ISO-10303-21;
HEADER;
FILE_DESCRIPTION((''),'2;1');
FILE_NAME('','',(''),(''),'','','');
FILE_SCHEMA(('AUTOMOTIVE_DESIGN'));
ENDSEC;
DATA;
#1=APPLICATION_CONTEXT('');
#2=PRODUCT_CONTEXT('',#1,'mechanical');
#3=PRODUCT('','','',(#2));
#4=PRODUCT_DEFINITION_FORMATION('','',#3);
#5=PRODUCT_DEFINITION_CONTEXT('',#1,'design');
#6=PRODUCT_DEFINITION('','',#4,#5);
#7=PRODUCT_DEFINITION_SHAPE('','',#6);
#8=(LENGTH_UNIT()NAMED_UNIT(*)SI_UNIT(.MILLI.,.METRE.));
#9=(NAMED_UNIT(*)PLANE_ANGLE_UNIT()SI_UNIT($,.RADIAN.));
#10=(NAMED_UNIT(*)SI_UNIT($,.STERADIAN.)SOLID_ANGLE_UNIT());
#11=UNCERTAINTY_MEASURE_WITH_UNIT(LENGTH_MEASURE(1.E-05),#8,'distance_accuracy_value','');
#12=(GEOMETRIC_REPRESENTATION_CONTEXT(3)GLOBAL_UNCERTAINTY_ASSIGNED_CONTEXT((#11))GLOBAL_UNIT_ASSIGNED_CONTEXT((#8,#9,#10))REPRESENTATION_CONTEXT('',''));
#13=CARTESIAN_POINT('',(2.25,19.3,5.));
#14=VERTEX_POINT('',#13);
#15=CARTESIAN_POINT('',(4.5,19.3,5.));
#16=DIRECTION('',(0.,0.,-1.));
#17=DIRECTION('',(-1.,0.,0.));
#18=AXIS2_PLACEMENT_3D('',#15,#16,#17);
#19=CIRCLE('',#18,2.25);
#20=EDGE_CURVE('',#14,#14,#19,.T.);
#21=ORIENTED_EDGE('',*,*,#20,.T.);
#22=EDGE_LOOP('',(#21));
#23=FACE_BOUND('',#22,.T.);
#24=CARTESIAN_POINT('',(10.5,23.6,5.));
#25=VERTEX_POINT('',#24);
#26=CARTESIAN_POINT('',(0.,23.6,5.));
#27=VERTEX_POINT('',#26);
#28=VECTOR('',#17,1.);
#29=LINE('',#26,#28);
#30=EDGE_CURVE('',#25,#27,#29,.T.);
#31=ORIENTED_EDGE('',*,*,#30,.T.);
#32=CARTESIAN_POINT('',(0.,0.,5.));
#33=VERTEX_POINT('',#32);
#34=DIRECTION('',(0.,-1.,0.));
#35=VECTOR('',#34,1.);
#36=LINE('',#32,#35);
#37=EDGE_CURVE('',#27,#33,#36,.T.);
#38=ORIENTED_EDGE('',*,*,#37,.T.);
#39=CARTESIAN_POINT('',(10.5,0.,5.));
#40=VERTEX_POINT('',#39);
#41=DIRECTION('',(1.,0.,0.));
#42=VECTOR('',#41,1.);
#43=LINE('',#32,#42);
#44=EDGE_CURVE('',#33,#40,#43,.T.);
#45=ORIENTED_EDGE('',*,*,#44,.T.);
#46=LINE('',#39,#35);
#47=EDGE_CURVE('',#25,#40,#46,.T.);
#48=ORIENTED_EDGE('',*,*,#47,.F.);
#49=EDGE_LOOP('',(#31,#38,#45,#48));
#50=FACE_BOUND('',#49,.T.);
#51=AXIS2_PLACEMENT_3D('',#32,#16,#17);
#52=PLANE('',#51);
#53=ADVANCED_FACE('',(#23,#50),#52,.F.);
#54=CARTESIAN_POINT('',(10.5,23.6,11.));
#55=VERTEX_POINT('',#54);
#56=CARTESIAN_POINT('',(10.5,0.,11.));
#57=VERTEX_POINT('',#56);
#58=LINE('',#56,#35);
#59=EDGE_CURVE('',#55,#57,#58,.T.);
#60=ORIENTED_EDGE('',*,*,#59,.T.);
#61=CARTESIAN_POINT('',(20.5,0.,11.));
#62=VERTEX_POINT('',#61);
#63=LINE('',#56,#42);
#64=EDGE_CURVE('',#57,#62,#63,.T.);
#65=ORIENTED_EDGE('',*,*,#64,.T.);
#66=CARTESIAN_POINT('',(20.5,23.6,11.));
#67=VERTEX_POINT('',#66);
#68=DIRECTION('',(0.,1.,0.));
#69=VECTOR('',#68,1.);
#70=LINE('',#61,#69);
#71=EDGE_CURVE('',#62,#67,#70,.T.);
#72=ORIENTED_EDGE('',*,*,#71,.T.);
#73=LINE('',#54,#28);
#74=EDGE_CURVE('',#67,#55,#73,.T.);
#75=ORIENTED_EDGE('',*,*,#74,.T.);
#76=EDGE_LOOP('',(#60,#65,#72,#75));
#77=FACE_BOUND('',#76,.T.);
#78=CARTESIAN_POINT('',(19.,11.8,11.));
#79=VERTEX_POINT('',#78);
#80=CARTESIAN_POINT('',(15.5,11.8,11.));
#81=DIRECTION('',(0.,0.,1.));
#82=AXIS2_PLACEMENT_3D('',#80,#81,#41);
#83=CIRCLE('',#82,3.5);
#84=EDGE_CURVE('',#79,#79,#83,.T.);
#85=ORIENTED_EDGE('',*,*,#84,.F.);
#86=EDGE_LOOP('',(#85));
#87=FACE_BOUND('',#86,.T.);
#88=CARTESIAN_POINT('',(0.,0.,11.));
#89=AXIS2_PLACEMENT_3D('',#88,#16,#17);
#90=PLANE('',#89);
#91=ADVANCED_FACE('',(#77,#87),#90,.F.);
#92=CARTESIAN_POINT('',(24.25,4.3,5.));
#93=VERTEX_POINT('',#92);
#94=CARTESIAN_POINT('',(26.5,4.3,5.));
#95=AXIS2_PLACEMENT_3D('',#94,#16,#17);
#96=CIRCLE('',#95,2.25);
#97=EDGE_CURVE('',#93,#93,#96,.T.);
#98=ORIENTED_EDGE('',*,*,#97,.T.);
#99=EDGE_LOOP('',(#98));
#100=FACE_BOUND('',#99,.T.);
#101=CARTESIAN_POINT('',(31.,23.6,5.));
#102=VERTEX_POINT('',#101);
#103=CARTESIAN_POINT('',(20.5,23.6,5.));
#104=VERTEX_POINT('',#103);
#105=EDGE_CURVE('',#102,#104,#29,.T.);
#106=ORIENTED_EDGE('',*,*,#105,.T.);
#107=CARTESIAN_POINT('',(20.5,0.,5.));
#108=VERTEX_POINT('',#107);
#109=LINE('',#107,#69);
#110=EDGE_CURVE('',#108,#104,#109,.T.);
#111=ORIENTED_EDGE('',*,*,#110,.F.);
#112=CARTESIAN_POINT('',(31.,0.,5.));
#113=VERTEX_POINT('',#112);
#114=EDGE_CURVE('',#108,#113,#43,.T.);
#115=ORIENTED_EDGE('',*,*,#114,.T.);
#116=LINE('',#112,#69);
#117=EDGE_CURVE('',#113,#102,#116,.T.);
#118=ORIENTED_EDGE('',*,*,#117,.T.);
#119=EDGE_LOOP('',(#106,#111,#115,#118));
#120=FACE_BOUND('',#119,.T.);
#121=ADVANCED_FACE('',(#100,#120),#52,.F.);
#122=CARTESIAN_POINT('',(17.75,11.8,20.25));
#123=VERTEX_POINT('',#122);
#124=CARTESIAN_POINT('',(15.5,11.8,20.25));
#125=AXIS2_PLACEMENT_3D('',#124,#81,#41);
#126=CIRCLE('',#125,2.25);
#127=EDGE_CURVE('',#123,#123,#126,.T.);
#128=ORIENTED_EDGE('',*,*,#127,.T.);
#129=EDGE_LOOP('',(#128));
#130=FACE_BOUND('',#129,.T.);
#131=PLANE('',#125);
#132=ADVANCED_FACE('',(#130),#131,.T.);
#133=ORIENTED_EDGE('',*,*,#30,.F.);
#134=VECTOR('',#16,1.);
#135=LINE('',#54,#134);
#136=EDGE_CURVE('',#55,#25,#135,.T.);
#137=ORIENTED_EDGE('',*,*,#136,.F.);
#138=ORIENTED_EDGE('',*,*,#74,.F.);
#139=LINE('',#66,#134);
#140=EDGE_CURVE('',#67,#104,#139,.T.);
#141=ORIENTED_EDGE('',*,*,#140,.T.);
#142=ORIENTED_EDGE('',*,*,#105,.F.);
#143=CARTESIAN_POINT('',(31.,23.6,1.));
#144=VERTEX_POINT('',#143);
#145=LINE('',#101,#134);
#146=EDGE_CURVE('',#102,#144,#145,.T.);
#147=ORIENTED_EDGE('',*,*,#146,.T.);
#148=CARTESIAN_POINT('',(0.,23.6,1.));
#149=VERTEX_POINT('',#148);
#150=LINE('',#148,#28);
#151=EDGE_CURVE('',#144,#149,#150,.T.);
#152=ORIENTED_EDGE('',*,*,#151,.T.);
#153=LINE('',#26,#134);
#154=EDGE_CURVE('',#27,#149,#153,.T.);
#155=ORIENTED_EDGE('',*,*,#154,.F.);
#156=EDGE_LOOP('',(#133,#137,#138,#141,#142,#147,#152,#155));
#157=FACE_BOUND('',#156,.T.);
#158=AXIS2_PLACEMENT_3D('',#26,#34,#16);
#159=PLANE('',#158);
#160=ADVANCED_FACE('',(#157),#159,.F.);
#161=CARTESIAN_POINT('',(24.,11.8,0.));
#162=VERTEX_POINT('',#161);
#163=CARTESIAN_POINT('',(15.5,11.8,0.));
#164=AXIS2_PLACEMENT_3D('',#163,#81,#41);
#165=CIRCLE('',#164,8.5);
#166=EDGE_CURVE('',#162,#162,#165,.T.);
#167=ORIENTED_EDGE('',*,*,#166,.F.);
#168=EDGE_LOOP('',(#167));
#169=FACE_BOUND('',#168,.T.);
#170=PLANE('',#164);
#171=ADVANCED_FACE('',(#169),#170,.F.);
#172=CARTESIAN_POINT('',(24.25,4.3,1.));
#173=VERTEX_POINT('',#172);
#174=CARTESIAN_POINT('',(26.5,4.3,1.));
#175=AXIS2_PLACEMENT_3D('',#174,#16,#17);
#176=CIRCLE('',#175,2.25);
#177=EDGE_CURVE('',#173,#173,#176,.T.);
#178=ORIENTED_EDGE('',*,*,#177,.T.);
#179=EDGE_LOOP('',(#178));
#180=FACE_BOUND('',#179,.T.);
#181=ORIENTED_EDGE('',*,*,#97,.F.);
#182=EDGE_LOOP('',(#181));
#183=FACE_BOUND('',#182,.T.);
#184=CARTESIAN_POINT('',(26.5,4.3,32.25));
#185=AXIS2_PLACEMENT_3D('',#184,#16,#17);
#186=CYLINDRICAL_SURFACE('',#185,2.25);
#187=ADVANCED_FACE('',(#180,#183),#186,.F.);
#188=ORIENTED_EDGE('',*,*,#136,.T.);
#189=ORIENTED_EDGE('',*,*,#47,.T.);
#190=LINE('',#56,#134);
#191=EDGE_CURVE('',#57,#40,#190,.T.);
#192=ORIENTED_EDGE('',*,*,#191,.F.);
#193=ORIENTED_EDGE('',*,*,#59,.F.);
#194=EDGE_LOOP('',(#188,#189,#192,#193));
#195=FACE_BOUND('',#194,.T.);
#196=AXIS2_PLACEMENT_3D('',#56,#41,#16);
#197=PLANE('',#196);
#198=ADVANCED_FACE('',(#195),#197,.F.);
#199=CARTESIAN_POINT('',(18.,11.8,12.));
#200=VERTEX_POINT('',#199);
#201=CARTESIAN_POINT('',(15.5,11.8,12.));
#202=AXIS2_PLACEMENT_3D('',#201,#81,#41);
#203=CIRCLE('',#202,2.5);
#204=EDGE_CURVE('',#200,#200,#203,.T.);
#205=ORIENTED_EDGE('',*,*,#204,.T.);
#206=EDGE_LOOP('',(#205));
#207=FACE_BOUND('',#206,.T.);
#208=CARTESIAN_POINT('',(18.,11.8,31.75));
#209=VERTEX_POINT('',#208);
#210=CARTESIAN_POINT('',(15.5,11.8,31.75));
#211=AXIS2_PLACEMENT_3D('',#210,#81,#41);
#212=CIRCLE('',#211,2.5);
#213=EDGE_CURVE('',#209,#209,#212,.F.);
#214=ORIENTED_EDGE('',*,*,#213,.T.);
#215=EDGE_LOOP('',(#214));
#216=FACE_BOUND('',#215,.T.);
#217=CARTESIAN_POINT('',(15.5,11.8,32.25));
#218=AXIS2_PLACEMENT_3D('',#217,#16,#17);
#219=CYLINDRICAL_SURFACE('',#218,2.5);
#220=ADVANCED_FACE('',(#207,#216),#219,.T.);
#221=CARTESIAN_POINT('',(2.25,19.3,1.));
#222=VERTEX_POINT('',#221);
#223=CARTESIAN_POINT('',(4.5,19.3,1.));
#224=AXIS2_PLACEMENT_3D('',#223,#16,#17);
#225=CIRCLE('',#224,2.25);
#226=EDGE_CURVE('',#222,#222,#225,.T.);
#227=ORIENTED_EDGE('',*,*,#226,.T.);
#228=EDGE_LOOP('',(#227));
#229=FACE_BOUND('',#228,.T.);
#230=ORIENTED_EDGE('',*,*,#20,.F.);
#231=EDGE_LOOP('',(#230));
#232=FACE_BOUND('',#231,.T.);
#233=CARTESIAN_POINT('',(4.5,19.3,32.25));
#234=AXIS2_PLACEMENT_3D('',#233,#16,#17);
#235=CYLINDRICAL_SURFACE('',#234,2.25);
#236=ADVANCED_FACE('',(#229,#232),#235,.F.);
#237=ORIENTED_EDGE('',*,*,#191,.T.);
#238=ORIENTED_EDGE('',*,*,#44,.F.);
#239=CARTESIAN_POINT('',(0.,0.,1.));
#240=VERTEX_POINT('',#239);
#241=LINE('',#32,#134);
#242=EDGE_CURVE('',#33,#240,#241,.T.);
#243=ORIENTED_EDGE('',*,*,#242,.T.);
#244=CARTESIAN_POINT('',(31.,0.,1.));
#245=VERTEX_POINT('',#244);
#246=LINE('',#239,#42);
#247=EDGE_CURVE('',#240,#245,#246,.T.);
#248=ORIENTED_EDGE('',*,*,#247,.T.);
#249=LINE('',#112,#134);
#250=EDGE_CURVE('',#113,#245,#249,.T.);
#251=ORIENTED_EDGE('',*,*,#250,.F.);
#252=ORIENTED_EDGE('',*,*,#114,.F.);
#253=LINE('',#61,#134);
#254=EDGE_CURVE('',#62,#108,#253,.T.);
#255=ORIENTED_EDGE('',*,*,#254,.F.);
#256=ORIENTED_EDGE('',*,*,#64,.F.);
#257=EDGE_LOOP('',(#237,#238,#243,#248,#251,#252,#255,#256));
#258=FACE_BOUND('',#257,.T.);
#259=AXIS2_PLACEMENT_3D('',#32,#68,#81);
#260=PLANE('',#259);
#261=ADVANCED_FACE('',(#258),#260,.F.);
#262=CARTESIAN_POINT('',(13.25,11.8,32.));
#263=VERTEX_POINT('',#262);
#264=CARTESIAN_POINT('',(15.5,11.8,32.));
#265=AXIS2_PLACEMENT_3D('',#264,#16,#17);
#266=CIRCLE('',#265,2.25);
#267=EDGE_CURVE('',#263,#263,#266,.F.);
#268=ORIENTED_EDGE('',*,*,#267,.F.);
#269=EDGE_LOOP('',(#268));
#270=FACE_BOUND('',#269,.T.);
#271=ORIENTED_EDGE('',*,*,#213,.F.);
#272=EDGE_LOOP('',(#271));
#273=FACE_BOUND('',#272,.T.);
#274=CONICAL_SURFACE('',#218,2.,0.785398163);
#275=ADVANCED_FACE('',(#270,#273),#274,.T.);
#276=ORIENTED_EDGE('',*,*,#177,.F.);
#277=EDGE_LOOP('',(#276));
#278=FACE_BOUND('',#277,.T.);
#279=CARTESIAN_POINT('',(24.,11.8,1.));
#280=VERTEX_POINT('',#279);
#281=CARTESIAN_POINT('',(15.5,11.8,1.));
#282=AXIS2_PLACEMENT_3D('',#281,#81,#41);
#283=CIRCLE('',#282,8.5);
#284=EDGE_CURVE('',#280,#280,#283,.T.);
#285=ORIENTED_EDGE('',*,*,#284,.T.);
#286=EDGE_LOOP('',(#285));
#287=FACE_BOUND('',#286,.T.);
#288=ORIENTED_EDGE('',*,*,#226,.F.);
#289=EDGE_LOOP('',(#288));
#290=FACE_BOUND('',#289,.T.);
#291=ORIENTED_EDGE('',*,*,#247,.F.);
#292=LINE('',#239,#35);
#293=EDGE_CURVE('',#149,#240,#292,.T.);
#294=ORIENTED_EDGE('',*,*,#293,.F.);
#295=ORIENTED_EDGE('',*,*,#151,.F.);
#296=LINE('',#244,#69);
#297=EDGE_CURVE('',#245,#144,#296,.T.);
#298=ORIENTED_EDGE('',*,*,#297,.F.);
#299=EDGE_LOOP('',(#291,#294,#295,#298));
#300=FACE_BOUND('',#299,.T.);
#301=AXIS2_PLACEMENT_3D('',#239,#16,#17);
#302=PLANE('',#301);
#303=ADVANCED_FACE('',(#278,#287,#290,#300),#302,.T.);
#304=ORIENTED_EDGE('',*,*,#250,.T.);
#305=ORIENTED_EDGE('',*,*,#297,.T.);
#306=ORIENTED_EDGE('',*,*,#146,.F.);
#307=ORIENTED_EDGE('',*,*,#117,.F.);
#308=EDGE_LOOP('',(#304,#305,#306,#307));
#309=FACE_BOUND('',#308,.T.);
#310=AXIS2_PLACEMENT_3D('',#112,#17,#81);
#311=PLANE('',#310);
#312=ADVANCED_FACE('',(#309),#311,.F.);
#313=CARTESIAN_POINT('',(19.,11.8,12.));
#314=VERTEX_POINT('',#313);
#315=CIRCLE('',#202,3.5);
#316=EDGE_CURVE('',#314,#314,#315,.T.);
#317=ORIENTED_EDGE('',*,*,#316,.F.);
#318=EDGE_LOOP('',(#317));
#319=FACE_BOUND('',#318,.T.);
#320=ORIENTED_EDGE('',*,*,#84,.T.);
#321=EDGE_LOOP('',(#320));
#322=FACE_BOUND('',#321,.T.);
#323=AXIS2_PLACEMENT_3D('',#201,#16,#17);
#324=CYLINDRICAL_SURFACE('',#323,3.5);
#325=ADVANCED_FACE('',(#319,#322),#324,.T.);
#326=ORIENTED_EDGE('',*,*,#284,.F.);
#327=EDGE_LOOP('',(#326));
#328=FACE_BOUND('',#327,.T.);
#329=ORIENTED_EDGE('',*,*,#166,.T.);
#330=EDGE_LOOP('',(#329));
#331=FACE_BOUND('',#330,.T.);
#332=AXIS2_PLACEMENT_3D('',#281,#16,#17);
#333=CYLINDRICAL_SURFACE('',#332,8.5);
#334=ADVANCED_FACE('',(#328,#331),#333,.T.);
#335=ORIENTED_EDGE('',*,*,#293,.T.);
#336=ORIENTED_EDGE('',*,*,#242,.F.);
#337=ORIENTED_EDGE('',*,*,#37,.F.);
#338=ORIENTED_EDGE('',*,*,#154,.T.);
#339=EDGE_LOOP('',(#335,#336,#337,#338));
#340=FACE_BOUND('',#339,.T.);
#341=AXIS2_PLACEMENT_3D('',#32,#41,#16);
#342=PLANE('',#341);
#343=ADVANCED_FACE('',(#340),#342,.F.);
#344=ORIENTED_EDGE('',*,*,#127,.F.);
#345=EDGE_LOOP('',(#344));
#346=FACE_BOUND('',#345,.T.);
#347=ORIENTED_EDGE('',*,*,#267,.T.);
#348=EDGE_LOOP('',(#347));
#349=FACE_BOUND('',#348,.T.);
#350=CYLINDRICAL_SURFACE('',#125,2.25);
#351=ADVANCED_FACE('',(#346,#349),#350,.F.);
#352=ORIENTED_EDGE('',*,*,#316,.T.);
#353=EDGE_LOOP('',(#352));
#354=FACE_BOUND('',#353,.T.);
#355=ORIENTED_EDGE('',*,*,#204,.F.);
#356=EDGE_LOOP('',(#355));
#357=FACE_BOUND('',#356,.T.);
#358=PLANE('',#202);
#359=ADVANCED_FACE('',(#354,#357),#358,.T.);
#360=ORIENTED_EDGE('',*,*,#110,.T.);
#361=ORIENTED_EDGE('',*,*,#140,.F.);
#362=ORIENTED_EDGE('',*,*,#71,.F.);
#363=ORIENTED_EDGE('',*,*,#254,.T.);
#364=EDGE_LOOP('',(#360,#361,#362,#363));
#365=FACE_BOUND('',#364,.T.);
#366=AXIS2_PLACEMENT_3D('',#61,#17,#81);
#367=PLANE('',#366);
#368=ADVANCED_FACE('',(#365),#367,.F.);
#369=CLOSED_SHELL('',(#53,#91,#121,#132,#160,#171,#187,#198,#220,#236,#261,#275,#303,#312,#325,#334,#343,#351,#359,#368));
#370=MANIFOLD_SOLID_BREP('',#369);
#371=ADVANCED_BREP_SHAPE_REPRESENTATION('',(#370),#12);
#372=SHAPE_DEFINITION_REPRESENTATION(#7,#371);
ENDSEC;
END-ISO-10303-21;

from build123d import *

# Parameters (mm, degrees)
SKETCH1_R           = 8.5
BOSS_EXTRUDE1_DEPTH = 1
SKETCH2_W           = 31
SKETCH2_H           = 23.6
BOSS_EXTRUDE2_DEPTH = 4
SKETCH3_W           = 10
SKETCH3_H           = 23.6
BOSS_EXTRUDE3_DEPTH = 6
SKETCH4_R           = 3.5
BOSS_EXTRUDE4_DEPTH = 1
SKETCH5_R           = 2.5
BOSS_EXTRUDE5_DEPTH = 20.25
SKETCH7_R           = 2.25
CUT_EXTRUDE1_DEPTH  = 12
SKETCH8_R           = 2.25
CUT_EXTRUDE2_DEPTH  = 50.945194964
CHAMFER1_SIZE       = 0.5


with BuildPart() as part:
    # Sketch1 → Boss-Extrude1 (new body)
    with BuildSketch(Plane.XY):
        with Locations((15.5, 11.8)):
            Circle(SKETCH1_R)
    extrude(amount=BOSS_EXTRUDE1_DEPTH)

    # Sketch2 → Boss-Extrude2 (add)
    with BuildSketch(Plane.XY.offset(1)):
        with Locations((15.5, 11.8)):
            Rectangle(SKETCH2_W, SKETCH2_H)
    extrude(amount=BOSS_EXTRUDE2_DEPTH)

    # Sketch3 → Boss-Extrude3 (add)
    with BuildSketch(Plane.XY.offset(5)):
        with Locations((15.5, 11.8)):
            Rectangle(SKETCH3_W, SKETCH3_H)
    extrude(amount=BOSS_EXTRUDE3_DEPTH)

    # Sketch4 → Boss-Extrude4 (add)
    with BuildSketch(Plane.XY.offset(11)):
        with Locations((15.5, 11.8)):
            Circle(SKETCH4_R)
    extrude(amount=BOSS_EXTRUDE4_DEPTH)

    # Sketch5 → Boss-Extrude5 (add)
    with BuildSketch(Plane.XY.offset(12)):
        with Locations((15.5, 11.8)):
            Circle(SKETCH5_R)
    extrude(amount=BOSS_EXTRUDE5_DEPTH)

    # Sketch7 → Cut-Extrude1 (cut)
    with BuildSketch(Plane.XY.offset(32.25)):
        with Locations((15.5, 11.8)):
            Circle(SKETCH7_R)
    extrude(amount=-CUT_EXTRUDE1_DEPTH, mode=Mode.SUBTRACT)

    # Sketch8 → Cut-Extrude2 (cut, through all)
    with BuildSketch(Plane(origin=(0, 0, 1), x_dir=(-1, 0, 0), z_dir=(0, 0, -1))):
        with Locations((-26.5, 4.3)):
            Circle(SKETCH8_R)
        with Locations((-4.5, 19.3)):
            Circle(SKETCH8_R)
    extrude(amount=-CUT_EXTRUDE2_DEPTH, mode=Mode.SUBTRACT)

    # Chamfer1
    # the kernel refuses this chamfer: 0.5 mm, written as the material it takes off along each edge
    with BuildSketch(Plane(origin=(15.5, 11.8, 32.25), x_dir=(1, 0, 0), z_dir=(0, -1, 0))) as chamfer1_piece_1:
        Polygon((2.5, -CHAMFER1_SIZE), (2.5 - CHAMFER1_SIZE, 0), (2.5, 0), align=None)
    revolve(axis=Axis((15.5, 11.8, 32.25), (0, 0, 1)), mode=Mode.SUBTRACT)


solid = part.part
